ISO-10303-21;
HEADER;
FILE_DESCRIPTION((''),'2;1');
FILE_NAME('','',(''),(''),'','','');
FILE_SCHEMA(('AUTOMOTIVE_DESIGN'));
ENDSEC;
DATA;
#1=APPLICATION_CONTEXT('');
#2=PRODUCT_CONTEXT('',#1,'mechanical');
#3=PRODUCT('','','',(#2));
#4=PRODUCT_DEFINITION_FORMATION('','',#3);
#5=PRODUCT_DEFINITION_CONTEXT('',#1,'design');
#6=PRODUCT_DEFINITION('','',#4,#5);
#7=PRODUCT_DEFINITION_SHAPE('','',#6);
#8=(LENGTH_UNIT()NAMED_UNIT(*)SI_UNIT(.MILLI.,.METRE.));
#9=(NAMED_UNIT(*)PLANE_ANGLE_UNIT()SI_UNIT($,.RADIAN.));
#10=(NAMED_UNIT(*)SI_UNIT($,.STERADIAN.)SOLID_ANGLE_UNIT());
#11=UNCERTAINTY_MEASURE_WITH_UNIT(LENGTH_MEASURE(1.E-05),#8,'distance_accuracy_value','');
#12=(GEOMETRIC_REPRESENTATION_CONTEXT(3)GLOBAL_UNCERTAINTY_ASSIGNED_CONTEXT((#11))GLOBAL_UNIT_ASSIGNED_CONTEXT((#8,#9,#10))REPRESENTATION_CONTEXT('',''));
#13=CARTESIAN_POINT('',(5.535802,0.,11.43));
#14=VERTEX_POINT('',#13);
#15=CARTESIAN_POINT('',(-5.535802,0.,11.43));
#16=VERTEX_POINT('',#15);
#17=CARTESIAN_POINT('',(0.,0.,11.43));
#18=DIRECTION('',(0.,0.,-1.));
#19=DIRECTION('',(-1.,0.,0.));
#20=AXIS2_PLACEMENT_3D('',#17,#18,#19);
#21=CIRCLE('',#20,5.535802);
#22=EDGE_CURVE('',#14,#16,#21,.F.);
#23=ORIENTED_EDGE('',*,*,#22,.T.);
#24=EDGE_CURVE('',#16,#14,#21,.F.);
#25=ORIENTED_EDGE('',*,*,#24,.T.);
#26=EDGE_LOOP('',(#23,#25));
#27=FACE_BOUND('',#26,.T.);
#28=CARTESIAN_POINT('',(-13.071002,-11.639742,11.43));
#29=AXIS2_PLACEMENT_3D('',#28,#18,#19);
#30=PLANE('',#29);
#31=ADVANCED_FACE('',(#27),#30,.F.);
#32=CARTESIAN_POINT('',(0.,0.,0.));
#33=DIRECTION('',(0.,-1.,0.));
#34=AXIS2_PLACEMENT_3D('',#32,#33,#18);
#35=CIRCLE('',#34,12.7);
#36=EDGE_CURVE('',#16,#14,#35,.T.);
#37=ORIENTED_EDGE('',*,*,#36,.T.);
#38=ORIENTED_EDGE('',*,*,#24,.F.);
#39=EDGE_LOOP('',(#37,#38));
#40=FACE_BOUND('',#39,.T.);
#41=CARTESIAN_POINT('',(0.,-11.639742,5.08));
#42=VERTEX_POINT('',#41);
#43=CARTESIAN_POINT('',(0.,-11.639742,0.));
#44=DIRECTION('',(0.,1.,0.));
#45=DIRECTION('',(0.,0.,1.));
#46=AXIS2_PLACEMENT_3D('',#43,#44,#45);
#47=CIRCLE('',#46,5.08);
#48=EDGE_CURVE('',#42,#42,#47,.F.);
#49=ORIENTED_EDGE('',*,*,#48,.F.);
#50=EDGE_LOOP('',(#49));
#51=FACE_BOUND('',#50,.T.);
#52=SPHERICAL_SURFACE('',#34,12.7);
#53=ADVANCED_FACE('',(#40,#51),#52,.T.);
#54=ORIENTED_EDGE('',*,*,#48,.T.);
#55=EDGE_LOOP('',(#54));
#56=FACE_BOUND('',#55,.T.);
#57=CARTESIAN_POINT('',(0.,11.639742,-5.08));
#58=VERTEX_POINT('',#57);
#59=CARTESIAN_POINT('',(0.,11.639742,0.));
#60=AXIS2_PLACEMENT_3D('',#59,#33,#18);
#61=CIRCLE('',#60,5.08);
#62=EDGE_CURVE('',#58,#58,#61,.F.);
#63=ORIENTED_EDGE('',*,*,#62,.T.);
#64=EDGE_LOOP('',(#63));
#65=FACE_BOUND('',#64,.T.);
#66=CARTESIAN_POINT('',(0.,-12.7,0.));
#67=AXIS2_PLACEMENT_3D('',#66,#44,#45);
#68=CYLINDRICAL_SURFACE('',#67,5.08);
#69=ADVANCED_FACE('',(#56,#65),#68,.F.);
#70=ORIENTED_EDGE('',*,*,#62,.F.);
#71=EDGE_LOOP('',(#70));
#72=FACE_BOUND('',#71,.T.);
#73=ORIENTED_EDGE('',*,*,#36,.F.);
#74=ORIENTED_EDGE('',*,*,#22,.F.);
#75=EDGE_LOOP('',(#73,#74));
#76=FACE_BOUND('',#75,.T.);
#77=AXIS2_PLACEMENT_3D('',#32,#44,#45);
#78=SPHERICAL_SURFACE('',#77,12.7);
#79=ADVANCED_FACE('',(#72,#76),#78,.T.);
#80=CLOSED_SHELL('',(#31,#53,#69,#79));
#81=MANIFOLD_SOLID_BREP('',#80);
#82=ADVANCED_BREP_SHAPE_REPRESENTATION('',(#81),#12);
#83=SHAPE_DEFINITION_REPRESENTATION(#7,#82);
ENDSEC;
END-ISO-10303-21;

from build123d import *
from build123d.topology import SkipClean

# Parameters (mm, degrees)
SKETCH1_R               = 12.7
BOSS_EXTRUDE1_DEPTH     = 12.7
FILLET1_R               = 12.7
BOSS_EXTRUDE2_START     = 12.7
SKETCH2_R               = 12.7
BOSS_EXTRUDE2_DEPTH     = 12.7
FILLET2_R               = 12.7
CUT_EXTRUDE1_DEPTH      = 22.997045372
CUT_EXTRUDE1_DEPTH_BACK = 22.997045372
SKETCH3_R               = 5.08
CUT_EXTRUDE2_DEPTH      = 22.402439379
CUT_EXTRUDE2_DEPTH_BACK = 22.402439379
SKETCH5_W               = 27.579814606
SKETCH5_H               = 6.012661004


with BuildPart() as part:
    # Sketch1 → Boss-Extrude1 (new body)
    with BuildSketch(Plane(origin=(0, 0, 0), x_dir=(1, 0, 0), z_dir=(0, 1, 0))):
        with Locations(Location((0, 0, 0), (0, 0, 270))):
            Circle(SKETCH1_R)
    extrude(amount=BOSS_EXTRUDE1_DEPTH)

    # Fillet1
    fillet1_edges = [part.edges().sort_by_distance(p)[0] for p in [
        (0, 12.7, -12.7),
    ]]
    fillet(fillet1_edges, radius=FILLET1_R - 0.0001)  # a hair under: the kernel refuses the full size

    # Sketch2 → Boss-Extrude2 (add)
    with SkipClean():  # the faces are left unmerged after this step: merging them gives an invalid solid
        with BuildSketch(Plane.XZ.offset(BOSS_EXTRUDE2_START)):
            with Locations(Location((0, 0, 0), (0, 0, 270))):
                Circle(SKETCH2_R)
        extrude(amount=-BOSS_EXTRUDE2_DEPTH)

    # Fillet2
    fillet2_edges = [part.edges().sort_by_distance(p)[0] for p in [
        (0, -12.7, 12.7),
    ]]
    fillet(fillet2_edges, radius=FILLET2_R - 0.0001)  # a hair under: the kernel refuses the full size

    # Sketch3 → Cut-Extrude1 (cut, two sides: drawn at the far end of the back side and taken through both)
    with BuildSketch(Plane(origin=(0, 0, 0), x_dir=(1, 0, 0), z_dir=(0, 1, 0)).offset(-CUT_EXTRUDE1_DEPTH_BACK)):
        with Locations(Location((0, 0, 0), (0, 0, 90))):
            Circle(SKETCH3_R)
    extrude(amount=CUT_EXTRUDE1_DEPTH + CUT_EXTRUDE1_DEPTH_BACK, mode=Mode.SUBTRACT)

    # Sketch5 → Cut-Extrude2 (cut, two sides: drawn at the far end of the back side and taken through both)
    with BuildSketch(Plane(origin=(0, 0, 0), x_dir=(1, 0, 0), z_dir=(0, 1, 0)).offset(-CUT_EXTRUDE2_DEPTH_BACK)):
        with Locations((0.71890512, -14.436330502)):
            Rectangle(SKETCH5_W, SKETCH5_H)
    extrude(amount=CUT_EXTRUDE2_DEPTH + CUT_EXTRUDE2_DEPTH_BACK, mode=Mode.SUBTRACT)


solid = part.part
